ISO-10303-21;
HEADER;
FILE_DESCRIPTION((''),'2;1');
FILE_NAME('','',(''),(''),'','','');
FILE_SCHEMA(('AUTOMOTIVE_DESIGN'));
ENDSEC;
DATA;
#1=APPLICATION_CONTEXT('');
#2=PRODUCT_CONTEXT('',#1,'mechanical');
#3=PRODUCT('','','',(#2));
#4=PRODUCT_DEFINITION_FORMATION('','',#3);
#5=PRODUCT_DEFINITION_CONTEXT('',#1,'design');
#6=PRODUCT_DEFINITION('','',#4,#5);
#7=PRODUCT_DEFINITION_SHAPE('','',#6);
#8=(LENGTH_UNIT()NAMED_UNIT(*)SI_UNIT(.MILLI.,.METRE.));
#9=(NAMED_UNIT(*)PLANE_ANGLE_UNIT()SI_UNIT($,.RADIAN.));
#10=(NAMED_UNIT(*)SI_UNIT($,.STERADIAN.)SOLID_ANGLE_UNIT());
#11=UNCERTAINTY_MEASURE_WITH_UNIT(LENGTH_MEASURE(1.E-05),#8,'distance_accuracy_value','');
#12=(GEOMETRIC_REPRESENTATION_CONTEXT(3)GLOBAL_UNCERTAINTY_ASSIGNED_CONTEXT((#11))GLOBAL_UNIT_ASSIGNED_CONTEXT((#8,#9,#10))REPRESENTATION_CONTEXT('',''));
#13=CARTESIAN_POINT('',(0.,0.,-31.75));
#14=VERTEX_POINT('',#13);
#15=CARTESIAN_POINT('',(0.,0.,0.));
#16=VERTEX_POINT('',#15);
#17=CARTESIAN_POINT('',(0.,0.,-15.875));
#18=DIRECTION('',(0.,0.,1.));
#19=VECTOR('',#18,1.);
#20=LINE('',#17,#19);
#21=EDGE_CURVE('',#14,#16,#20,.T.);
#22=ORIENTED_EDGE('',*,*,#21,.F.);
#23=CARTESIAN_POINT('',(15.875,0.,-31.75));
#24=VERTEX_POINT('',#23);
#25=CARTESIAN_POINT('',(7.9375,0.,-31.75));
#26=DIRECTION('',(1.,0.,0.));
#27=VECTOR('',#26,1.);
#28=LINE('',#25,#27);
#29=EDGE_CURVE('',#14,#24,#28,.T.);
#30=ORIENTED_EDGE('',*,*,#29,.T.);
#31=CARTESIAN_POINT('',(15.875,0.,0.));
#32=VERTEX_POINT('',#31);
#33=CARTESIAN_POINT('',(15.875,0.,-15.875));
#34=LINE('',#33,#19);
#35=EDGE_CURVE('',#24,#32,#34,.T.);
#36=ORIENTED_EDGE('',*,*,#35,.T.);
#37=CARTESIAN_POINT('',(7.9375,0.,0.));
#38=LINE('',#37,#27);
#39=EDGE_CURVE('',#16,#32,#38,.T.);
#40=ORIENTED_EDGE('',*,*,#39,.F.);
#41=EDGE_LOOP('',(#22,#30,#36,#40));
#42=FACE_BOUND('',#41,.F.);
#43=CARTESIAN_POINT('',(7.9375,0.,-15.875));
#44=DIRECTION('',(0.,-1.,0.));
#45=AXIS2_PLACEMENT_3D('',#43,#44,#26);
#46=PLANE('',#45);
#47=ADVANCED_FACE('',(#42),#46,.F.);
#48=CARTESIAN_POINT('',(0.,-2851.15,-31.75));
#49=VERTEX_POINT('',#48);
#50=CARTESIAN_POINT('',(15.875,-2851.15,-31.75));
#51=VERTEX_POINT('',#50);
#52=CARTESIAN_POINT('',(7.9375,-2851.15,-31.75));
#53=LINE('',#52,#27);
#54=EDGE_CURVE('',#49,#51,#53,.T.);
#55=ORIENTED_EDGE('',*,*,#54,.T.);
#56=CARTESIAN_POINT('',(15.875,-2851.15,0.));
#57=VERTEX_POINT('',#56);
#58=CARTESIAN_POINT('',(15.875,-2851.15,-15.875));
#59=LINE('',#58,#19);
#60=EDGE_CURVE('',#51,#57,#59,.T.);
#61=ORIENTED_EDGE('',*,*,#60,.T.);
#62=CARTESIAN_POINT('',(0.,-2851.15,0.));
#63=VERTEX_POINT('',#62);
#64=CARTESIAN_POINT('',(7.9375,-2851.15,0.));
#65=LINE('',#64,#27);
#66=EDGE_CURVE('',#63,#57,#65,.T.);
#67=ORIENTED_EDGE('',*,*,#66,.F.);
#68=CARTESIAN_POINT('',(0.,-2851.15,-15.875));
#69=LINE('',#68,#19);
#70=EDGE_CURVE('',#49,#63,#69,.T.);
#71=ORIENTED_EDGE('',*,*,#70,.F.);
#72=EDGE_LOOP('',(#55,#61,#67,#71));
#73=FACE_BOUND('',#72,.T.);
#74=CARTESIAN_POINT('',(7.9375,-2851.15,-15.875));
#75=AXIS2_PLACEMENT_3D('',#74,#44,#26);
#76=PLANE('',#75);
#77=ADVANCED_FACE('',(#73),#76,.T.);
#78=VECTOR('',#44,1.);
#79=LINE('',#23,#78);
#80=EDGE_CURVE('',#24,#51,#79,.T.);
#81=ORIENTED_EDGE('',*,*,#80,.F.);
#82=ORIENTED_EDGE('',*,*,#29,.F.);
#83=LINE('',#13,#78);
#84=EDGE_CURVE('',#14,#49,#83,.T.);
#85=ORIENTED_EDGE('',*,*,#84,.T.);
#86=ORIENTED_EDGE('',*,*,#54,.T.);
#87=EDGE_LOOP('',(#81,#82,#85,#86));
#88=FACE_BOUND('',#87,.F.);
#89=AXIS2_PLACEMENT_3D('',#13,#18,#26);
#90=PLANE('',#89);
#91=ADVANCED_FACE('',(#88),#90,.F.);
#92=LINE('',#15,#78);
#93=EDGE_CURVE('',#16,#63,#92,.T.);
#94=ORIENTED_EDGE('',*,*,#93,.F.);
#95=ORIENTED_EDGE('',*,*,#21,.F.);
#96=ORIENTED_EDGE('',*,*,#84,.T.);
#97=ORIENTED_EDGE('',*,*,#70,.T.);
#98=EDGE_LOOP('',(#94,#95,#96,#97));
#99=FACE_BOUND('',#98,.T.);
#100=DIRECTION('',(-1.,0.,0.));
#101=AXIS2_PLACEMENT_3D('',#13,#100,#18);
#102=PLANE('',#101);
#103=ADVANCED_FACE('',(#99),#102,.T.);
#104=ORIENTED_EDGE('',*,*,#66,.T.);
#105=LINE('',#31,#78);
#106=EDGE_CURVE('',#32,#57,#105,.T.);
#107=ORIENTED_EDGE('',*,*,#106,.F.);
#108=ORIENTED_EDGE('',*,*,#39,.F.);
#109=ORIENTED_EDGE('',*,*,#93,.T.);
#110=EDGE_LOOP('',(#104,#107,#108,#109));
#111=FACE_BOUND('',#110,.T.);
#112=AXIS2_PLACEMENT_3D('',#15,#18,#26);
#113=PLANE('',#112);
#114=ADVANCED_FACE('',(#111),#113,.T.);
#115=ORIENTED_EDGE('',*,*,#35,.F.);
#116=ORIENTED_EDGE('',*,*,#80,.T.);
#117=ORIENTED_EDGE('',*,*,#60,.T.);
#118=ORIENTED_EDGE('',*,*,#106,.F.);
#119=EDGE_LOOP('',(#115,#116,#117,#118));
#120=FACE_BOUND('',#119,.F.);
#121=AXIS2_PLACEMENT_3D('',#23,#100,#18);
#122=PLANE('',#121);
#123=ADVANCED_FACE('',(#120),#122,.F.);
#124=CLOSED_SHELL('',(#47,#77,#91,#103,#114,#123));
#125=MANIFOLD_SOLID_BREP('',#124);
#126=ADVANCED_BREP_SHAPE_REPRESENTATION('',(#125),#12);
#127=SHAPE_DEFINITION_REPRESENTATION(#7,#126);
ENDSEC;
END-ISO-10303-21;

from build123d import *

# Parameters (mm, degrees)
F0_W     = 15.875
F0_H     = 31.75
F1_DEPTH = 2851.15


# Not quite as in the source:
# - a feature names something its author has since deleted; it is built from what else it names


with BuildPart() as f1:
    # F0 (on Front) → F1 (new body)
    with BuildSketch(Plane.XZ):
        with Locations((7.9375, -15.875)):
            Rectangle(F0_W, F0_H)
    extrude(amount=F1_DEPTH)


solid = f1.part
